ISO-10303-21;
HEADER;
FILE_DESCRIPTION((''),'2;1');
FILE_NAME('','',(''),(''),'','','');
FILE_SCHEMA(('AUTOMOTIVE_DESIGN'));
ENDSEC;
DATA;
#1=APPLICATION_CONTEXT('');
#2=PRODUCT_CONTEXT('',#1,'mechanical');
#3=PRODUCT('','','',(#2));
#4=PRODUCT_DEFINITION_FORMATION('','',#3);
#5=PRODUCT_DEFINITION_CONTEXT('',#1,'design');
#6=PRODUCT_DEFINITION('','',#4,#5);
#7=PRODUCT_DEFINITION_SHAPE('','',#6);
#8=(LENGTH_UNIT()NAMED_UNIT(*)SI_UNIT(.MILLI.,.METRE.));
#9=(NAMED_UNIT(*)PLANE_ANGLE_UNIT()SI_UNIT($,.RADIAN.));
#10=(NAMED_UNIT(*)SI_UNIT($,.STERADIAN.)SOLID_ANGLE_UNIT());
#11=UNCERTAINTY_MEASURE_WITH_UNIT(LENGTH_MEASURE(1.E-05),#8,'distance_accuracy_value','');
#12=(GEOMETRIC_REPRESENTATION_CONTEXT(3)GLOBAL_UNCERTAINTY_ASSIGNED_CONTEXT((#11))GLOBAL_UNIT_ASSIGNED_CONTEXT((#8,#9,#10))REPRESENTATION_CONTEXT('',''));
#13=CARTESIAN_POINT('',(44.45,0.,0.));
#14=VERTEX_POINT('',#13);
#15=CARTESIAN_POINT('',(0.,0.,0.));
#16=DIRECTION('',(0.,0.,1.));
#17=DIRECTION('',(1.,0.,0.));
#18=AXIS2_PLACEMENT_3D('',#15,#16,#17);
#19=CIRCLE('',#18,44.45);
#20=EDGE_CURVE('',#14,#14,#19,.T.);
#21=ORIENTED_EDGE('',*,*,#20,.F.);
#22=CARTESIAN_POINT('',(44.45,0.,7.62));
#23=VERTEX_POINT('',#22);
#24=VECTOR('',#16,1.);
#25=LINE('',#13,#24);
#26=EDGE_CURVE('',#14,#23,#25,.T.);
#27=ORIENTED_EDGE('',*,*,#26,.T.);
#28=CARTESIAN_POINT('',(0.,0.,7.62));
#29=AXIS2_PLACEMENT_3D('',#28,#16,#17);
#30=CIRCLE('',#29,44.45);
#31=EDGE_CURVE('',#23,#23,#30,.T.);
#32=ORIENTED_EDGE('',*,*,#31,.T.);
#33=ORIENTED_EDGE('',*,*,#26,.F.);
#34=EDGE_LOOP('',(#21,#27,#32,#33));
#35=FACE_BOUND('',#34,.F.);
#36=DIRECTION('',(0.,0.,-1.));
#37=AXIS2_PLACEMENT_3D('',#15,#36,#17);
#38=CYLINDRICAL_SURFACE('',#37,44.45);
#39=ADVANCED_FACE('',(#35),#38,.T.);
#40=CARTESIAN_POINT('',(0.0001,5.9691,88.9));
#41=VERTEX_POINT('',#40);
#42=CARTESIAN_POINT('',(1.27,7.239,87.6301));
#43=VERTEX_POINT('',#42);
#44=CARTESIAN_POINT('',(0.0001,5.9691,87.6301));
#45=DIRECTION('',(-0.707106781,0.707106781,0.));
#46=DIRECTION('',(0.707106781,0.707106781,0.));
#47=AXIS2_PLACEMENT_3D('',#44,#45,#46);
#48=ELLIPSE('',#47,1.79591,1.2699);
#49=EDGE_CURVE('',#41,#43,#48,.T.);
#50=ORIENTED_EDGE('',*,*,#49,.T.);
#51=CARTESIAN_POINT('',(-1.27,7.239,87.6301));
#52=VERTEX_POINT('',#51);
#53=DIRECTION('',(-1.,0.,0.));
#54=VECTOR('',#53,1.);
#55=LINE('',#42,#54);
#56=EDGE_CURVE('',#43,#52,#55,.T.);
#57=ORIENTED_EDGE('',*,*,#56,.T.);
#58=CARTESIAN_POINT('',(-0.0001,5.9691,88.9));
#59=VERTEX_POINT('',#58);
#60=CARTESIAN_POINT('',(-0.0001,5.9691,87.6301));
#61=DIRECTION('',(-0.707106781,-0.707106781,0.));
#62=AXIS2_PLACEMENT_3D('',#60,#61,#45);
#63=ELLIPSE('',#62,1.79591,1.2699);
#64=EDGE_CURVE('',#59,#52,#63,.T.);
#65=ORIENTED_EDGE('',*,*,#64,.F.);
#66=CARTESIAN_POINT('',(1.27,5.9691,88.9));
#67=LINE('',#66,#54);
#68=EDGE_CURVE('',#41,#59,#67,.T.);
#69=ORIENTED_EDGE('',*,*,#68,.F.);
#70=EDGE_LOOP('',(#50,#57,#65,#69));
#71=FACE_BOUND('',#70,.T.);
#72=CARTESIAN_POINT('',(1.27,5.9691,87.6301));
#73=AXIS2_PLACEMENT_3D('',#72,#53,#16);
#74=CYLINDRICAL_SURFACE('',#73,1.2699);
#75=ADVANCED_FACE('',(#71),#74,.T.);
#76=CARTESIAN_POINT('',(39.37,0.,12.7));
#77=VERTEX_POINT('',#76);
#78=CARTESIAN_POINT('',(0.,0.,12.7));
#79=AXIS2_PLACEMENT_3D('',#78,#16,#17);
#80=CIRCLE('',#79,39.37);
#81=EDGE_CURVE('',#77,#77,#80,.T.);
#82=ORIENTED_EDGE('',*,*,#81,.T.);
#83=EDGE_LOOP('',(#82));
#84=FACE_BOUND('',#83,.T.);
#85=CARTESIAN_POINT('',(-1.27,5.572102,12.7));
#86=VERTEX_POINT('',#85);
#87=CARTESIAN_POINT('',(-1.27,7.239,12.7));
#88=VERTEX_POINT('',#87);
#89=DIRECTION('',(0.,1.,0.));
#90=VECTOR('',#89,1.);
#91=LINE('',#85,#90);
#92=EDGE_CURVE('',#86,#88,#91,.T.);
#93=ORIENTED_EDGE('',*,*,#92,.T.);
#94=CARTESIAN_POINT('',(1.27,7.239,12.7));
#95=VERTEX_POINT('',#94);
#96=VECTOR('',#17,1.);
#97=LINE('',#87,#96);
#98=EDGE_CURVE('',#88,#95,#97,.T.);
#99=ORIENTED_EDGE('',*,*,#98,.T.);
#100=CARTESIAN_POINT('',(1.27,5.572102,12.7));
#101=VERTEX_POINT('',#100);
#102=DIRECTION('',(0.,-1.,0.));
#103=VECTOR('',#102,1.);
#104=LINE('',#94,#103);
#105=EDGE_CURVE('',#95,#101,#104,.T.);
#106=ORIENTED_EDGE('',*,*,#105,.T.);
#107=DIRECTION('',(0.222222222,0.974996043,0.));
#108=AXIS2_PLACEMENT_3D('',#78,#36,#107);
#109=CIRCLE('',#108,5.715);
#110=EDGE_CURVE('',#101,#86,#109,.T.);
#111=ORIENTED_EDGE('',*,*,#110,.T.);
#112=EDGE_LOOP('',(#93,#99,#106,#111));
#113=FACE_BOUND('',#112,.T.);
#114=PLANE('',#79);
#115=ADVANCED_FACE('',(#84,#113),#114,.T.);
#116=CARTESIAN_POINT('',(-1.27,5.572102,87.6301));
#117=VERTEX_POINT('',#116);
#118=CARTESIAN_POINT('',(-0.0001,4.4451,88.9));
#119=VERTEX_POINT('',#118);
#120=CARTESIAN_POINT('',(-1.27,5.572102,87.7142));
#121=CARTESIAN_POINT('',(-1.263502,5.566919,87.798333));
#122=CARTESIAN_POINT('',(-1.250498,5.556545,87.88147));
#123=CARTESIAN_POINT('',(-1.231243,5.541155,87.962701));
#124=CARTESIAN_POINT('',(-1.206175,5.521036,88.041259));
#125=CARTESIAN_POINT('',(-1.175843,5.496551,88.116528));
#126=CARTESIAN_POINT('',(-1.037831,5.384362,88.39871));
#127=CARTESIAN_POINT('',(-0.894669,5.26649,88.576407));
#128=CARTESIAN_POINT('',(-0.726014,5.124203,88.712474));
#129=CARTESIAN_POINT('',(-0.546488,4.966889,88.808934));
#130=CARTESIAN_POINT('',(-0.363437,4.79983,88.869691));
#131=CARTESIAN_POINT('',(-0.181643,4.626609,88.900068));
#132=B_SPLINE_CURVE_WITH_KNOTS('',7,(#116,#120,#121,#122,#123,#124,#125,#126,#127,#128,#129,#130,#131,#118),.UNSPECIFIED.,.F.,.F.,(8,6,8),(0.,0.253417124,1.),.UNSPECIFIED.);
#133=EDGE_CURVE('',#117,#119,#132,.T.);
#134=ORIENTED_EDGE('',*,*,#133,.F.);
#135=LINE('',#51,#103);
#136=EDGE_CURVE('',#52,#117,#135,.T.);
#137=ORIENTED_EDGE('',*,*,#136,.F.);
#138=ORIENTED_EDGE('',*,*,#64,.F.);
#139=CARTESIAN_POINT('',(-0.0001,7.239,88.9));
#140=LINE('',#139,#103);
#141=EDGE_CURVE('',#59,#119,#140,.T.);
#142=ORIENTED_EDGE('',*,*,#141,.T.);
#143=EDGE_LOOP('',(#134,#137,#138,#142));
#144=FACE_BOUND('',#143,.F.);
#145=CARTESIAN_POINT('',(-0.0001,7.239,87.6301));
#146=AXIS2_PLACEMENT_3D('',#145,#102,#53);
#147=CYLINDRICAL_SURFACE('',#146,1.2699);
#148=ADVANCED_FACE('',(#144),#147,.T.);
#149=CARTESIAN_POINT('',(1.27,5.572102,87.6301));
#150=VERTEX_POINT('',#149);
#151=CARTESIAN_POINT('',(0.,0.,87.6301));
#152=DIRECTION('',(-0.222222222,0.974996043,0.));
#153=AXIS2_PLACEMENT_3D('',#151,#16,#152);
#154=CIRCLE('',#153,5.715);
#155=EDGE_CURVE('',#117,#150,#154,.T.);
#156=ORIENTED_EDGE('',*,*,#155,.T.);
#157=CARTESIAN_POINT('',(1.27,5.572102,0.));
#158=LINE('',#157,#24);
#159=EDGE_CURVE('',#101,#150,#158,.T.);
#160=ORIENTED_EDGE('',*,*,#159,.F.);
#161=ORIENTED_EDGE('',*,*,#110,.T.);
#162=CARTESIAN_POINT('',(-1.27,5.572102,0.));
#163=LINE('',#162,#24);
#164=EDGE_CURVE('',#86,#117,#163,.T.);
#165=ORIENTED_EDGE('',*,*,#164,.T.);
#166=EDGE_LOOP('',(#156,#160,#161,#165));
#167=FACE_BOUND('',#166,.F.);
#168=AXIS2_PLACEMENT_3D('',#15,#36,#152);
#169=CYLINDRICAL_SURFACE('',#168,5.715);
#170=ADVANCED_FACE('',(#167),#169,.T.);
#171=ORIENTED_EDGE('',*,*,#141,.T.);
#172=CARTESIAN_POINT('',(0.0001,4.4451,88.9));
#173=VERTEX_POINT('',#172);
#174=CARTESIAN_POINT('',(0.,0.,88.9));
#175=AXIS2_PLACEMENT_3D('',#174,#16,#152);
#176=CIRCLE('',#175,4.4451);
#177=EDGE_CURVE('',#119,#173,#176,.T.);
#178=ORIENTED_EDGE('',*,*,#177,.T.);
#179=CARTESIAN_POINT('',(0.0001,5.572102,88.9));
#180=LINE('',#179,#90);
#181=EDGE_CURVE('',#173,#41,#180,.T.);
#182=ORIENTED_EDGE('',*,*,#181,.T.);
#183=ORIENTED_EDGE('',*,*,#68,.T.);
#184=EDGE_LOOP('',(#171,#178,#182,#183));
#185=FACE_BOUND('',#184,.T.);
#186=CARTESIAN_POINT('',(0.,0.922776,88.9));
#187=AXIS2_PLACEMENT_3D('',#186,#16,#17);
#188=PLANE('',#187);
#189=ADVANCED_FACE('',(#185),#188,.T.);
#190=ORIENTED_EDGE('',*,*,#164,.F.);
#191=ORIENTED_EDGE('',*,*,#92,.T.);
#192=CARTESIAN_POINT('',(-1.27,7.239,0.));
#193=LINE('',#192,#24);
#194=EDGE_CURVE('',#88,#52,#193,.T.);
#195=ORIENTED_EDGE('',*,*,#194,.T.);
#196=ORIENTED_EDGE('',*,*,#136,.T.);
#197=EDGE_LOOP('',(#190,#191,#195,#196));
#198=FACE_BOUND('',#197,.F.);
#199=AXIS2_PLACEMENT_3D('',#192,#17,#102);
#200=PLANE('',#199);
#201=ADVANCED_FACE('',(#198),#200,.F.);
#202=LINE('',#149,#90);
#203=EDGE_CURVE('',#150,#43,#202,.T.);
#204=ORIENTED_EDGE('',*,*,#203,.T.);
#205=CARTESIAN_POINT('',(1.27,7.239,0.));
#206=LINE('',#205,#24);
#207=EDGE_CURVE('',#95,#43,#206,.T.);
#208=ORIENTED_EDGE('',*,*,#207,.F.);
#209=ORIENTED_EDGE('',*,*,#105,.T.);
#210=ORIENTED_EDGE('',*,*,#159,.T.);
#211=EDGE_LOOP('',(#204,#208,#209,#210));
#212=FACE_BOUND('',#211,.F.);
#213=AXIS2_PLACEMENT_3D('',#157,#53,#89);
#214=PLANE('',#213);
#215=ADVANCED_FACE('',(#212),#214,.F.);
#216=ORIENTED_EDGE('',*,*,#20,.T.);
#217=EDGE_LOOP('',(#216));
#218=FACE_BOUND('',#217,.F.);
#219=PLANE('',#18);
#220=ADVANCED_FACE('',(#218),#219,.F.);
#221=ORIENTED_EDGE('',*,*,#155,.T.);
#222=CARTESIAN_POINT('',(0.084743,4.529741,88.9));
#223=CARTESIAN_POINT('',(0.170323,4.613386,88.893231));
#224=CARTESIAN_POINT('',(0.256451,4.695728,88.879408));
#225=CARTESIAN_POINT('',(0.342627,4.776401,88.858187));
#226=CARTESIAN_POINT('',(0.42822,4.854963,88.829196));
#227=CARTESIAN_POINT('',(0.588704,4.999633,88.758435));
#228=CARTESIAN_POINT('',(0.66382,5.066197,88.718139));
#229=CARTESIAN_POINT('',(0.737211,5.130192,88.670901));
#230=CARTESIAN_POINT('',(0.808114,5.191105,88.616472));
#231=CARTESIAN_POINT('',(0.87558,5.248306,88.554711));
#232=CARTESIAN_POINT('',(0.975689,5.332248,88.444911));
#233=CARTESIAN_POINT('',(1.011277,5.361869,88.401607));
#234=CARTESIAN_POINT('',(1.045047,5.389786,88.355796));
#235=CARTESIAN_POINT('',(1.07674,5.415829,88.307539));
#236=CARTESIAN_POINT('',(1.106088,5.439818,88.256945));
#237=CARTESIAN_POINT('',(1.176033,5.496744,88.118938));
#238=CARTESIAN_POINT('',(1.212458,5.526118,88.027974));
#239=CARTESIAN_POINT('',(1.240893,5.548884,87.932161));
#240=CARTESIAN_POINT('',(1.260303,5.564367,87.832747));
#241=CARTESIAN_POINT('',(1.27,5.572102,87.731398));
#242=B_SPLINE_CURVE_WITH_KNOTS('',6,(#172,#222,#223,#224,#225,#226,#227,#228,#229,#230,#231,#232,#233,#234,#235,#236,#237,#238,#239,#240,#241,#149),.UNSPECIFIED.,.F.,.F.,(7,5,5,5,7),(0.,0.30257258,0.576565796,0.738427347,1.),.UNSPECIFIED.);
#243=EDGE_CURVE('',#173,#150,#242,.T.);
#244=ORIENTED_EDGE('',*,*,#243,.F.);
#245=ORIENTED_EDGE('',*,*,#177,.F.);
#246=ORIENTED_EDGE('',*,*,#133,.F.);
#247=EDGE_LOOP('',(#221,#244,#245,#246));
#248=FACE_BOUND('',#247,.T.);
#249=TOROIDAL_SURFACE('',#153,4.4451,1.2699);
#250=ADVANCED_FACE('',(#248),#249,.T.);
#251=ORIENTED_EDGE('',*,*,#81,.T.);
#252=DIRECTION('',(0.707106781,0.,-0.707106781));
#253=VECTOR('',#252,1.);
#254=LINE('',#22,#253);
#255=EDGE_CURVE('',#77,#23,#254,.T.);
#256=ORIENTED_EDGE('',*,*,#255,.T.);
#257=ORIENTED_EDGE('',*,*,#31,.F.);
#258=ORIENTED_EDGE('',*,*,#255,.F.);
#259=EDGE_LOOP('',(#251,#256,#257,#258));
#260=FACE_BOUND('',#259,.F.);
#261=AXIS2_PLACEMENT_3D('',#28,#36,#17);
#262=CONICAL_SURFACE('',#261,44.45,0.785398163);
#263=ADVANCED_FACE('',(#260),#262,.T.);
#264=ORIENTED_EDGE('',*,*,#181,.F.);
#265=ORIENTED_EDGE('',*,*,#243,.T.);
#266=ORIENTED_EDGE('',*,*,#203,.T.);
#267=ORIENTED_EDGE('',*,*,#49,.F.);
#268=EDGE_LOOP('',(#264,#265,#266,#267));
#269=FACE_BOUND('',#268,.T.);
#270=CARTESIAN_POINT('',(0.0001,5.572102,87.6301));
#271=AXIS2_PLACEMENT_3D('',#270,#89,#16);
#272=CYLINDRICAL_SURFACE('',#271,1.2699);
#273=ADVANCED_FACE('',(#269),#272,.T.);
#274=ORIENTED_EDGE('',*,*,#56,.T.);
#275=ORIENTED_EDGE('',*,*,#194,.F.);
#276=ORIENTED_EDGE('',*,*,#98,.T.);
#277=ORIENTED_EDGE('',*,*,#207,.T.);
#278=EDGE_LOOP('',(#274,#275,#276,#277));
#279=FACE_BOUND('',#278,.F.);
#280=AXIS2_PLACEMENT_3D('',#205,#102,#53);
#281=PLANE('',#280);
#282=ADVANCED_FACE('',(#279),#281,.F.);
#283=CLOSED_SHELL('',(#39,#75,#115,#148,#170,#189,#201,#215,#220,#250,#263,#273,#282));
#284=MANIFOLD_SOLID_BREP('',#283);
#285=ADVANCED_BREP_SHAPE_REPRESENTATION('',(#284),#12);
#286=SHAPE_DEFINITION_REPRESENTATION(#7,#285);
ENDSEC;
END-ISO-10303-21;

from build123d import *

# Parameters (mm, degrees)
F0_R     = 44.45
F1_DEPTH = 12.7
F2_DEPTH = 88.9
F3_R     = 1.2699
F4_SIZE  = 5.08


# Not quite as in the source:
# - a fillet or chamfer is up to 0.001 mm smaller than in the source, because OpenCascade refuses the exact size


with BuildPart() as f1:
    # F0 (on Top) → F1 (new body)
    with BuildSketch(Plane.XY):
        Circle(F0_R)
        with BuildLine():
            ThreePointArc((1.27, 5.572102386), (0, -5.715), (-1.27, 5.572102386))
            Line((-1.27, 5.572102386), (-1.27, 7.239))
            Line((-1.27, 7.239), (1.27, 7.239))
            Line((1.27, 7.239), (1.27, 5.572102386))
        make_face(mode=Mode.SUBTRACT)
    extrude(amount=F1_DEPTH)

    # F0 (on Top) → F2 (join)
    with BuildSketch(Plane.XY):
        with BuildLine():
            Line((-1.27, 7.239), (-1.27, 5.572102386))
            ThreePointArc((-1.27, 5.572102386), (0, -5.715), (1.27, 5.572102386))
            Line((1.27, 5.572102386), (1.27, 7.239))
            Line((1.27, 7.239), (-1.27, 7.239))
        make_face()
    extrude(amount=F2_DEPTH)

    # F3 (radius 1.27 in the source; OpenCascade refuses exactly that, so slightly less here)
    f3_edges = [f1.edges().sort_by_distance(p)[0] for p in [
        (1.27, 6.405551, 88.9),
        (0, 7.239, 88.9),
        (-1.27, 6.405551, 88.9),
        (0, -5.715, 88.9),
    ]]
    fillet(f3_edges, radius=F3_R)

    # F4
    f4_edges = [f1.edges().sort_by_distance(p)[0] for p in [
        (-44.45, 0, 12.7),
    ]]
    chamfer(f4_edges, length=F4_SIZE)


solid = f1.part
